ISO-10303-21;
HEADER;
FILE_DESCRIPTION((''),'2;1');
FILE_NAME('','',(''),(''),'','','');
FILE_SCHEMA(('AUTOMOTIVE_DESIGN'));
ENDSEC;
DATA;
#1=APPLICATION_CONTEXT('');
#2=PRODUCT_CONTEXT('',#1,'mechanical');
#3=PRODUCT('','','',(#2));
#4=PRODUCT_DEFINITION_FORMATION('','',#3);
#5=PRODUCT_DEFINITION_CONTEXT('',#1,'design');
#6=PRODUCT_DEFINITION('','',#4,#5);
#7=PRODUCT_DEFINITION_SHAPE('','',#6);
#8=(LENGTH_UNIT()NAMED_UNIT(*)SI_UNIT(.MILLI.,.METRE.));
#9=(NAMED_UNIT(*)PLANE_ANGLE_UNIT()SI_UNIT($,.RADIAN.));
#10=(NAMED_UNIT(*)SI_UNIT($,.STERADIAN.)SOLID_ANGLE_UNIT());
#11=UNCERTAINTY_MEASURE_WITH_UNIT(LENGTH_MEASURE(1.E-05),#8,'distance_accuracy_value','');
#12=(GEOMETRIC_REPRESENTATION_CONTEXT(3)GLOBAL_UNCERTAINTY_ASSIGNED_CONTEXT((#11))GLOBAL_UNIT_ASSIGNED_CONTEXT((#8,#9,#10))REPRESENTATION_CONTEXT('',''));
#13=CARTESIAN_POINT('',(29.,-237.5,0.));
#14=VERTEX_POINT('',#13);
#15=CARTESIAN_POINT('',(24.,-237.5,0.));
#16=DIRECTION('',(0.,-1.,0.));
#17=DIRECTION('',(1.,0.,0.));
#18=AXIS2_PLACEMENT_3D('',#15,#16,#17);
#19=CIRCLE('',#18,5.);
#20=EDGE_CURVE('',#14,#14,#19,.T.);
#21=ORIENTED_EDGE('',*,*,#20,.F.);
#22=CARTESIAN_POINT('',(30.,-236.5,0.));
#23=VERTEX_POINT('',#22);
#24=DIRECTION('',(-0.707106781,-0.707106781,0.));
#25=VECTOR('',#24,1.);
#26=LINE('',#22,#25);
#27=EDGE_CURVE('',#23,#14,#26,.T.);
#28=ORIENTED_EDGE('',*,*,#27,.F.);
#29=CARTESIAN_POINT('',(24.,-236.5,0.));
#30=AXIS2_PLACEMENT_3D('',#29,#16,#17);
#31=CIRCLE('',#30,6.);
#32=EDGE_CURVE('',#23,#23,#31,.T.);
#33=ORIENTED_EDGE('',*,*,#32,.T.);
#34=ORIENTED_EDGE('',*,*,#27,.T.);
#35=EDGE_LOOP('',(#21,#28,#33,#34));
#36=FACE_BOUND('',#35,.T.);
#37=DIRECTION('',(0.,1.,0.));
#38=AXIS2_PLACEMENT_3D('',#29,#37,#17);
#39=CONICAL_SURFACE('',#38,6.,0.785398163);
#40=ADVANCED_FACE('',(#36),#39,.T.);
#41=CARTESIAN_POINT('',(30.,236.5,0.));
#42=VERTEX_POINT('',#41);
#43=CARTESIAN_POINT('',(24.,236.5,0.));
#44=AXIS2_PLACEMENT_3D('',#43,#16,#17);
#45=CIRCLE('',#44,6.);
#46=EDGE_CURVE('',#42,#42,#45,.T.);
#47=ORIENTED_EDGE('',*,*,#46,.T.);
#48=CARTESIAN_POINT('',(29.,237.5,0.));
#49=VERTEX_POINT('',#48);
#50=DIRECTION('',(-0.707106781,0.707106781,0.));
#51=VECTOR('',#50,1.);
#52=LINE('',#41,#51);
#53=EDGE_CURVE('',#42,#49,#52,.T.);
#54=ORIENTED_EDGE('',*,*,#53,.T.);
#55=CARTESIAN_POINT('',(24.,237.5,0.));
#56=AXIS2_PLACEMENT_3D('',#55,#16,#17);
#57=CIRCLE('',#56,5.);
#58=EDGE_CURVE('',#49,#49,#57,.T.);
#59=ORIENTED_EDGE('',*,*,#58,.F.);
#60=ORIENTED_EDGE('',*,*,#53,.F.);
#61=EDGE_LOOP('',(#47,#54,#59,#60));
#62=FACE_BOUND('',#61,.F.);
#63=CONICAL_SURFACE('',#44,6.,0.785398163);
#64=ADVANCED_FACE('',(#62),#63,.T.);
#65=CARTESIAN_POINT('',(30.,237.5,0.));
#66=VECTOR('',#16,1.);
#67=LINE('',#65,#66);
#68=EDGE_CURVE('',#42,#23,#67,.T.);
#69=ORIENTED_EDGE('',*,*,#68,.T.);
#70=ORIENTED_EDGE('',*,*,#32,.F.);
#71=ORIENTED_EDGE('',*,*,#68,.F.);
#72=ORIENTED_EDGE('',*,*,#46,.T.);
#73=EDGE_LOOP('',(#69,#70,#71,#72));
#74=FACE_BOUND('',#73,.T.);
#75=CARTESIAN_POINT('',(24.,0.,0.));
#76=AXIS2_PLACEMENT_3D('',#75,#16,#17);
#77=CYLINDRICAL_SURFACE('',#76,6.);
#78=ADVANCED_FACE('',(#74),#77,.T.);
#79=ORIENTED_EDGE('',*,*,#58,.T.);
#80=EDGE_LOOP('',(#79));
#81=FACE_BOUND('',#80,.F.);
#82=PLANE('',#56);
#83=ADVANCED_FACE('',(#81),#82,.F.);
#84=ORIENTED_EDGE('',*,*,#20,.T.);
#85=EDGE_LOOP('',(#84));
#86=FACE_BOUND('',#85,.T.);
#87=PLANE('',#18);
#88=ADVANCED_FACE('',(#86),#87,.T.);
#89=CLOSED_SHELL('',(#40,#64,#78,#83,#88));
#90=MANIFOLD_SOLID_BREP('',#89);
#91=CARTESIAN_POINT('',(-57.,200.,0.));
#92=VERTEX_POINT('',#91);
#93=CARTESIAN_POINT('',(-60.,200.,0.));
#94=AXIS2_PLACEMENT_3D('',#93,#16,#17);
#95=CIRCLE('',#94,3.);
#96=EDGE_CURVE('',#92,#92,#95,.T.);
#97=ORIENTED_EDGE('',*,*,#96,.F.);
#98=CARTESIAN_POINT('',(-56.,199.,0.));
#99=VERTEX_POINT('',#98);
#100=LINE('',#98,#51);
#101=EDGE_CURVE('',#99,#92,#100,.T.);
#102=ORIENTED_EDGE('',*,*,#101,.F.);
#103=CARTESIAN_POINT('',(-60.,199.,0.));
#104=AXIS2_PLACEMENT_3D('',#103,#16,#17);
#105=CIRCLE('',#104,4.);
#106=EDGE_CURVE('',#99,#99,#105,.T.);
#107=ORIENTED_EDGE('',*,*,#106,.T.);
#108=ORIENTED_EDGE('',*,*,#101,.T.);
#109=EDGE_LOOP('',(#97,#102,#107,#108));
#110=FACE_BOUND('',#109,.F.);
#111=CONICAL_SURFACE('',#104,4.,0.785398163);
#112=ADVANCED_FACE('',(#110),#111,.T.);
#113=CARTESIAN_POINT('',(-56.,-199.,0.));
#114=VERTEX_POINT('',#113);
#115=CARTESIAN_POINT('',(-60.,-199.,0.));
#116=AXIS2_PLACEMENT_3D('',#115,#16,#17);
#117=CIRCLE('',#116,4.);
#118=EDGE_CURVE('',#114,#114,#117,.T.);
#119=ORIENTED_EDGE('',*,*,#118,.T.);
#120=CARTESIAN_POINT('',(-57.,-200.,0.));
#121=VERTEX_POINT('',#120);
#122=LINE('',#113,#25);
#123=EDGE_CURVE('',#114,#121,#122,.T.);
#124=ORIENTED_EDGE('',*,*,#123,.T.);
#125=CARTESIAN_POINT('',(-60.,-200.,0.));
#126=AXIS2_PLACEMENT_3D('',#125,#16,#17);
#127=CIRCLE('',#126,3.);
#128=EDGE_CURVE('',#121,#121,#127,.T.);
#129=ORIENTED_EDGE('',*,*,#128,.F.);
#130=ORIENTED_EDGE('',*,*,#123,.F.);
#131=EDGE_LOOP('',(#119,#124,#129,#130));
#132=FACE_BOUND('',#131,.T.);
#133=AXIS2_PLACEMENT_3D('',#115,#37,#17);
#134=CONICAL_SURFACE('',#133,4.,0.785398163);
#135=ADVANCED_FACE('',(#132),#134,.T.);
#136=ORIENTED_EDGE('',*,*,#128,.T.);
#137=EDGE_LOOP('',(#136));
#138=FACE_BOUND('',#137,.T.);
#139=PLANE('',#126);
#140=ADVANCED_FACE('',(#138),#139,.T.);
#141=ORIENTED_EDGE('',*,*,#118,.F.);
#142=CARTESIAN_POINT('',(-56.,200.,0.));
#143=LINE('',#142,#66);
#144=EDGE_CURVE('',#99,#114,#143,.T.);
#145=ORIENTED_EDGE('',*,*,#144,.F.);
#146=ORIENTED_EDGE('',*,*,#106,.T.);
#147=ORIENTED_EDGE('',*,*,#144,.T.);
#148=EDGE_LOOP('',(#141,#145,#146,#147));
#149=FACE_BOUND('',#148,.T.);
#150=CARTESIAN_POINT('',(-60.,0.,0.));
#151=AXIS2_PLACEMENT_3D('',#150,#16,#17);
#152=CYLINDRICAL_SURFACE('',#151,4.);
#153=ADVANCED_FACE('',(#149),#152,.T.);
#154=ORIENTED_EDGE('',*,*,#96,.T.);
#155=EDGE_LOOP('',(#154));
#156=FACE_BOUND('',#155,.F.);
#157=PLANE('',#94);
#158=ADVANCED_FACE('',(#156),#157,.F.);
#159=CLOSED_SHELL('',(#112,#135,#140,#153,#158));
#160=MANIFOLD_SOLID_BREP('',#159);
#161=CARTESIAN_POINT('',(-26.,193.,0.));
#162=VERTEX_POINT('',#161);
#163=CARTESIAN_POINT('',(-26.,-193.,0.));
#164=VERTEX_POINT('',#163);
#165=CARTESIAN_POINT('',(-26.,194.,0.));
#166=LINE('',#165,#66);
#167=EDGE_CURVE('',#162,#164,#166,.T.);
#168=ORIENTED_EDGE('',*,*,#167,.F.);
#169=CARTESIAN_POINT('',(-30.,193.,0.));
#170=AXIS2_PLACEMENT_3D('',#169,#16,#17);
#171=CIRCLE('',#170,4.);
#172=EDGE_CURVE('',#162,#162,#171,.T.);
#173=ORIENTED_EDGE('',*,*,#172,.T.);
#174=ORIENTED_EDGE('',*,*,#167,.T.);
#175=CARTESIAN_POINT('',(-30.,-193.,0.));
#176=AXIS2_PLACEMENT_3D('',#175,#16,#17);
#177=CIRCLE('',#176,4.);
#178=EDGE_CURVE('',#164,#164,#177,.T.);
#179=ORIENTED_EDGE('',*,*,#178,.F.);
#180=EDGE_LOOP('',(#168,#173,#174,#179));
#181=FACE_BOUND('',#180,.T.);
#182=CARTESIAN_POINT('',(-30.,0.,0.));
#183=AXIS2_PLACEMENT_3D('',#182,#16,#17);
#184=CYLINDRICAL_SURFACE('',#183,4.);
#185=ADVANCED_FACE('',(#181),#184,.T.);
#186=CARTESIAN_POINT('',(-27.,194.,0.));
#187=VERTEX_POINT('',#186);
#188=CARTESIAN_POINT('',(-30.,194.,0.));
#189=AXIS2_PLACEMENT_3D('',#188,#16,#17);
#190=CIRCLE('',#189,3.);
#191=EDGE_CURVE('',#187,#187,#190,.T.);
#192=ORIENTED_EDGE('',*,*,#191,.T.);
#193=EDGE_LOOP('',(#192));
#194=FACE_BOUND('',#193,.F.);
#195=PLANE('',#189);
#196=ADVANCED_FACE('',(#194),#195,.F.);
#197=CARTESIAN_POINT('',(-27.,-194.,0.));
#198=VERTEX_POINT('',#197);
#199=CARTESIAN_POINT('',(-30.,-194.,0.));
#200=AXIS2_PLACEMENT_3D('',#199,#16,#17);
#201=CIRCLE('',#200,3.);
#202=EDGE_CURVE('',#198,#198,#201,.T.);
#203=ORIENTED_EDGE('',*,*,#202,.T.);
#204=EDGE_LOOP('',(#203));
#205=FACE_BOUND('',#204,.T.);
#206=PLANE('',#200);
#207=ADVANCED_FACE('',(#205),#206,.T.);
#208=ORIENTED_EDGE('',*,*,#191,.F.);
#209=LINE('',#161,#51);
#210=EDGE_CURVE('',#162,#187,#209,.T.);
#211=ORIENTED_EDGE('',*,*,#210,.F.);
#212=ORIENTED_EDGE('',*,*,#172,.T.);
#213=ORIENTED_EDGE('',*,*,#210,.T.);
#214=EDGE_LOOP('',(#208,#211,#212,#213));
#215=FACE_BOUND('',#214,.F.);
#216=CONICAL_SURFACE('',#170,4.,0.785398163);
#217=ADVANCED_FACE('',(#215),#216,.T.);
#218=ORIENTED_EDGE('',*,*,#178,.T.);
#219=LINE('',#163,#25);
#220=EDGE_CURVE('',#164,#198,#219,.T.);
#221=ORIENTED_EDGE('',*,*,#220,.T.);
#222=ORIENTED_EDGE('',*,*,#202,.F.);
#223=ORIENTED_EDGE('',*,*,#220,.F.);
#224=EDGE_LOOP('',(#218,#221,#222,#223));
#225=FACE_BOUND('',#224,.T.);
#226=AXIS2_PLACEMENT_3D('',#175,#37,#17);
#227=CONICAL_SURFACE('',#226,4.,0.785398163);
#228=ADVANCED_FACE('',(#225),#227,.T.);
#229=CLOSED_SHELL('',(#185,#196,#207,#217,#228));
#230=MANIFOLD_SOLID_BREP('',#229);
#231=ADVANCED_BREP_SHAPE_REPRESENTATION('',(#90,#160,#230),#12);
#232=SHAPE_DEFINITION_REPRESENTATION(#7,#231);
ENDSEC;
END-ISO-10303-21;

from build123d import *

# Parameters (mm, degrees)
F3_R      = 4
F4_DEPTH  = 194
F5_SIZE   = 1
F6_R      = 6
F7_DEPTH  = 237.5
F8_SIZE   = 1
F9_R      = 4
F10_DEPTH = 200
F11_SIZE  = 1


with BuildPart() as f4:
    # F3 (on Front) → F4 (new body, symmetric)
    with BuildSketch(Plane.XZ):
        with Locations((-30, 0)):
            Circle(F3_R)
    extrude(amount=F4_DEPTH, both=True)

    # F5
    f5_edges = [f4.edges().sort_by_distance(p)[0] for p in [
        (-34, -194, 0),
        (-34, 194, 0),
    ]]
    chamfer(f5_edges, length=F5_SIZE)


with BuildPart() as f7:
    # F6 (on Front) → F7 (new body, symmetric)
    with BuildSketch(Plane.XZ):
        with Locations((24, 0)):
            Circle(F6_R)
    extrude(amount=F7_DEPTH, both=True)

    # F8
    f8_edges = [f7.edges().sort_by_distance(p)[0] for p in [
        (18, -237.5, 0),
        (18, 237.5, 0),
    ]]
    chamfer(f8_edges, length=F8_SIZE)


with BuildPart() as f10:
    # F9 (on Front) → F10 (new body, symmetric)
    with BuildSketch(Plane.XZ):
        with Locations((-60, 0)):
            Circle(F9_R)
    extrude(amount=F10_DEPTH, both=True)

    # F11
    f11_edges = [f10.edges().sort_by_distance(p)[0] for p in [
        (-64, 200, 0),
        (-64, -200, 0),
    ]]
    chamfer(f11_edges, length=F11_SIZE)


solid = Compound([f4.part, f7.part, f10.part])
